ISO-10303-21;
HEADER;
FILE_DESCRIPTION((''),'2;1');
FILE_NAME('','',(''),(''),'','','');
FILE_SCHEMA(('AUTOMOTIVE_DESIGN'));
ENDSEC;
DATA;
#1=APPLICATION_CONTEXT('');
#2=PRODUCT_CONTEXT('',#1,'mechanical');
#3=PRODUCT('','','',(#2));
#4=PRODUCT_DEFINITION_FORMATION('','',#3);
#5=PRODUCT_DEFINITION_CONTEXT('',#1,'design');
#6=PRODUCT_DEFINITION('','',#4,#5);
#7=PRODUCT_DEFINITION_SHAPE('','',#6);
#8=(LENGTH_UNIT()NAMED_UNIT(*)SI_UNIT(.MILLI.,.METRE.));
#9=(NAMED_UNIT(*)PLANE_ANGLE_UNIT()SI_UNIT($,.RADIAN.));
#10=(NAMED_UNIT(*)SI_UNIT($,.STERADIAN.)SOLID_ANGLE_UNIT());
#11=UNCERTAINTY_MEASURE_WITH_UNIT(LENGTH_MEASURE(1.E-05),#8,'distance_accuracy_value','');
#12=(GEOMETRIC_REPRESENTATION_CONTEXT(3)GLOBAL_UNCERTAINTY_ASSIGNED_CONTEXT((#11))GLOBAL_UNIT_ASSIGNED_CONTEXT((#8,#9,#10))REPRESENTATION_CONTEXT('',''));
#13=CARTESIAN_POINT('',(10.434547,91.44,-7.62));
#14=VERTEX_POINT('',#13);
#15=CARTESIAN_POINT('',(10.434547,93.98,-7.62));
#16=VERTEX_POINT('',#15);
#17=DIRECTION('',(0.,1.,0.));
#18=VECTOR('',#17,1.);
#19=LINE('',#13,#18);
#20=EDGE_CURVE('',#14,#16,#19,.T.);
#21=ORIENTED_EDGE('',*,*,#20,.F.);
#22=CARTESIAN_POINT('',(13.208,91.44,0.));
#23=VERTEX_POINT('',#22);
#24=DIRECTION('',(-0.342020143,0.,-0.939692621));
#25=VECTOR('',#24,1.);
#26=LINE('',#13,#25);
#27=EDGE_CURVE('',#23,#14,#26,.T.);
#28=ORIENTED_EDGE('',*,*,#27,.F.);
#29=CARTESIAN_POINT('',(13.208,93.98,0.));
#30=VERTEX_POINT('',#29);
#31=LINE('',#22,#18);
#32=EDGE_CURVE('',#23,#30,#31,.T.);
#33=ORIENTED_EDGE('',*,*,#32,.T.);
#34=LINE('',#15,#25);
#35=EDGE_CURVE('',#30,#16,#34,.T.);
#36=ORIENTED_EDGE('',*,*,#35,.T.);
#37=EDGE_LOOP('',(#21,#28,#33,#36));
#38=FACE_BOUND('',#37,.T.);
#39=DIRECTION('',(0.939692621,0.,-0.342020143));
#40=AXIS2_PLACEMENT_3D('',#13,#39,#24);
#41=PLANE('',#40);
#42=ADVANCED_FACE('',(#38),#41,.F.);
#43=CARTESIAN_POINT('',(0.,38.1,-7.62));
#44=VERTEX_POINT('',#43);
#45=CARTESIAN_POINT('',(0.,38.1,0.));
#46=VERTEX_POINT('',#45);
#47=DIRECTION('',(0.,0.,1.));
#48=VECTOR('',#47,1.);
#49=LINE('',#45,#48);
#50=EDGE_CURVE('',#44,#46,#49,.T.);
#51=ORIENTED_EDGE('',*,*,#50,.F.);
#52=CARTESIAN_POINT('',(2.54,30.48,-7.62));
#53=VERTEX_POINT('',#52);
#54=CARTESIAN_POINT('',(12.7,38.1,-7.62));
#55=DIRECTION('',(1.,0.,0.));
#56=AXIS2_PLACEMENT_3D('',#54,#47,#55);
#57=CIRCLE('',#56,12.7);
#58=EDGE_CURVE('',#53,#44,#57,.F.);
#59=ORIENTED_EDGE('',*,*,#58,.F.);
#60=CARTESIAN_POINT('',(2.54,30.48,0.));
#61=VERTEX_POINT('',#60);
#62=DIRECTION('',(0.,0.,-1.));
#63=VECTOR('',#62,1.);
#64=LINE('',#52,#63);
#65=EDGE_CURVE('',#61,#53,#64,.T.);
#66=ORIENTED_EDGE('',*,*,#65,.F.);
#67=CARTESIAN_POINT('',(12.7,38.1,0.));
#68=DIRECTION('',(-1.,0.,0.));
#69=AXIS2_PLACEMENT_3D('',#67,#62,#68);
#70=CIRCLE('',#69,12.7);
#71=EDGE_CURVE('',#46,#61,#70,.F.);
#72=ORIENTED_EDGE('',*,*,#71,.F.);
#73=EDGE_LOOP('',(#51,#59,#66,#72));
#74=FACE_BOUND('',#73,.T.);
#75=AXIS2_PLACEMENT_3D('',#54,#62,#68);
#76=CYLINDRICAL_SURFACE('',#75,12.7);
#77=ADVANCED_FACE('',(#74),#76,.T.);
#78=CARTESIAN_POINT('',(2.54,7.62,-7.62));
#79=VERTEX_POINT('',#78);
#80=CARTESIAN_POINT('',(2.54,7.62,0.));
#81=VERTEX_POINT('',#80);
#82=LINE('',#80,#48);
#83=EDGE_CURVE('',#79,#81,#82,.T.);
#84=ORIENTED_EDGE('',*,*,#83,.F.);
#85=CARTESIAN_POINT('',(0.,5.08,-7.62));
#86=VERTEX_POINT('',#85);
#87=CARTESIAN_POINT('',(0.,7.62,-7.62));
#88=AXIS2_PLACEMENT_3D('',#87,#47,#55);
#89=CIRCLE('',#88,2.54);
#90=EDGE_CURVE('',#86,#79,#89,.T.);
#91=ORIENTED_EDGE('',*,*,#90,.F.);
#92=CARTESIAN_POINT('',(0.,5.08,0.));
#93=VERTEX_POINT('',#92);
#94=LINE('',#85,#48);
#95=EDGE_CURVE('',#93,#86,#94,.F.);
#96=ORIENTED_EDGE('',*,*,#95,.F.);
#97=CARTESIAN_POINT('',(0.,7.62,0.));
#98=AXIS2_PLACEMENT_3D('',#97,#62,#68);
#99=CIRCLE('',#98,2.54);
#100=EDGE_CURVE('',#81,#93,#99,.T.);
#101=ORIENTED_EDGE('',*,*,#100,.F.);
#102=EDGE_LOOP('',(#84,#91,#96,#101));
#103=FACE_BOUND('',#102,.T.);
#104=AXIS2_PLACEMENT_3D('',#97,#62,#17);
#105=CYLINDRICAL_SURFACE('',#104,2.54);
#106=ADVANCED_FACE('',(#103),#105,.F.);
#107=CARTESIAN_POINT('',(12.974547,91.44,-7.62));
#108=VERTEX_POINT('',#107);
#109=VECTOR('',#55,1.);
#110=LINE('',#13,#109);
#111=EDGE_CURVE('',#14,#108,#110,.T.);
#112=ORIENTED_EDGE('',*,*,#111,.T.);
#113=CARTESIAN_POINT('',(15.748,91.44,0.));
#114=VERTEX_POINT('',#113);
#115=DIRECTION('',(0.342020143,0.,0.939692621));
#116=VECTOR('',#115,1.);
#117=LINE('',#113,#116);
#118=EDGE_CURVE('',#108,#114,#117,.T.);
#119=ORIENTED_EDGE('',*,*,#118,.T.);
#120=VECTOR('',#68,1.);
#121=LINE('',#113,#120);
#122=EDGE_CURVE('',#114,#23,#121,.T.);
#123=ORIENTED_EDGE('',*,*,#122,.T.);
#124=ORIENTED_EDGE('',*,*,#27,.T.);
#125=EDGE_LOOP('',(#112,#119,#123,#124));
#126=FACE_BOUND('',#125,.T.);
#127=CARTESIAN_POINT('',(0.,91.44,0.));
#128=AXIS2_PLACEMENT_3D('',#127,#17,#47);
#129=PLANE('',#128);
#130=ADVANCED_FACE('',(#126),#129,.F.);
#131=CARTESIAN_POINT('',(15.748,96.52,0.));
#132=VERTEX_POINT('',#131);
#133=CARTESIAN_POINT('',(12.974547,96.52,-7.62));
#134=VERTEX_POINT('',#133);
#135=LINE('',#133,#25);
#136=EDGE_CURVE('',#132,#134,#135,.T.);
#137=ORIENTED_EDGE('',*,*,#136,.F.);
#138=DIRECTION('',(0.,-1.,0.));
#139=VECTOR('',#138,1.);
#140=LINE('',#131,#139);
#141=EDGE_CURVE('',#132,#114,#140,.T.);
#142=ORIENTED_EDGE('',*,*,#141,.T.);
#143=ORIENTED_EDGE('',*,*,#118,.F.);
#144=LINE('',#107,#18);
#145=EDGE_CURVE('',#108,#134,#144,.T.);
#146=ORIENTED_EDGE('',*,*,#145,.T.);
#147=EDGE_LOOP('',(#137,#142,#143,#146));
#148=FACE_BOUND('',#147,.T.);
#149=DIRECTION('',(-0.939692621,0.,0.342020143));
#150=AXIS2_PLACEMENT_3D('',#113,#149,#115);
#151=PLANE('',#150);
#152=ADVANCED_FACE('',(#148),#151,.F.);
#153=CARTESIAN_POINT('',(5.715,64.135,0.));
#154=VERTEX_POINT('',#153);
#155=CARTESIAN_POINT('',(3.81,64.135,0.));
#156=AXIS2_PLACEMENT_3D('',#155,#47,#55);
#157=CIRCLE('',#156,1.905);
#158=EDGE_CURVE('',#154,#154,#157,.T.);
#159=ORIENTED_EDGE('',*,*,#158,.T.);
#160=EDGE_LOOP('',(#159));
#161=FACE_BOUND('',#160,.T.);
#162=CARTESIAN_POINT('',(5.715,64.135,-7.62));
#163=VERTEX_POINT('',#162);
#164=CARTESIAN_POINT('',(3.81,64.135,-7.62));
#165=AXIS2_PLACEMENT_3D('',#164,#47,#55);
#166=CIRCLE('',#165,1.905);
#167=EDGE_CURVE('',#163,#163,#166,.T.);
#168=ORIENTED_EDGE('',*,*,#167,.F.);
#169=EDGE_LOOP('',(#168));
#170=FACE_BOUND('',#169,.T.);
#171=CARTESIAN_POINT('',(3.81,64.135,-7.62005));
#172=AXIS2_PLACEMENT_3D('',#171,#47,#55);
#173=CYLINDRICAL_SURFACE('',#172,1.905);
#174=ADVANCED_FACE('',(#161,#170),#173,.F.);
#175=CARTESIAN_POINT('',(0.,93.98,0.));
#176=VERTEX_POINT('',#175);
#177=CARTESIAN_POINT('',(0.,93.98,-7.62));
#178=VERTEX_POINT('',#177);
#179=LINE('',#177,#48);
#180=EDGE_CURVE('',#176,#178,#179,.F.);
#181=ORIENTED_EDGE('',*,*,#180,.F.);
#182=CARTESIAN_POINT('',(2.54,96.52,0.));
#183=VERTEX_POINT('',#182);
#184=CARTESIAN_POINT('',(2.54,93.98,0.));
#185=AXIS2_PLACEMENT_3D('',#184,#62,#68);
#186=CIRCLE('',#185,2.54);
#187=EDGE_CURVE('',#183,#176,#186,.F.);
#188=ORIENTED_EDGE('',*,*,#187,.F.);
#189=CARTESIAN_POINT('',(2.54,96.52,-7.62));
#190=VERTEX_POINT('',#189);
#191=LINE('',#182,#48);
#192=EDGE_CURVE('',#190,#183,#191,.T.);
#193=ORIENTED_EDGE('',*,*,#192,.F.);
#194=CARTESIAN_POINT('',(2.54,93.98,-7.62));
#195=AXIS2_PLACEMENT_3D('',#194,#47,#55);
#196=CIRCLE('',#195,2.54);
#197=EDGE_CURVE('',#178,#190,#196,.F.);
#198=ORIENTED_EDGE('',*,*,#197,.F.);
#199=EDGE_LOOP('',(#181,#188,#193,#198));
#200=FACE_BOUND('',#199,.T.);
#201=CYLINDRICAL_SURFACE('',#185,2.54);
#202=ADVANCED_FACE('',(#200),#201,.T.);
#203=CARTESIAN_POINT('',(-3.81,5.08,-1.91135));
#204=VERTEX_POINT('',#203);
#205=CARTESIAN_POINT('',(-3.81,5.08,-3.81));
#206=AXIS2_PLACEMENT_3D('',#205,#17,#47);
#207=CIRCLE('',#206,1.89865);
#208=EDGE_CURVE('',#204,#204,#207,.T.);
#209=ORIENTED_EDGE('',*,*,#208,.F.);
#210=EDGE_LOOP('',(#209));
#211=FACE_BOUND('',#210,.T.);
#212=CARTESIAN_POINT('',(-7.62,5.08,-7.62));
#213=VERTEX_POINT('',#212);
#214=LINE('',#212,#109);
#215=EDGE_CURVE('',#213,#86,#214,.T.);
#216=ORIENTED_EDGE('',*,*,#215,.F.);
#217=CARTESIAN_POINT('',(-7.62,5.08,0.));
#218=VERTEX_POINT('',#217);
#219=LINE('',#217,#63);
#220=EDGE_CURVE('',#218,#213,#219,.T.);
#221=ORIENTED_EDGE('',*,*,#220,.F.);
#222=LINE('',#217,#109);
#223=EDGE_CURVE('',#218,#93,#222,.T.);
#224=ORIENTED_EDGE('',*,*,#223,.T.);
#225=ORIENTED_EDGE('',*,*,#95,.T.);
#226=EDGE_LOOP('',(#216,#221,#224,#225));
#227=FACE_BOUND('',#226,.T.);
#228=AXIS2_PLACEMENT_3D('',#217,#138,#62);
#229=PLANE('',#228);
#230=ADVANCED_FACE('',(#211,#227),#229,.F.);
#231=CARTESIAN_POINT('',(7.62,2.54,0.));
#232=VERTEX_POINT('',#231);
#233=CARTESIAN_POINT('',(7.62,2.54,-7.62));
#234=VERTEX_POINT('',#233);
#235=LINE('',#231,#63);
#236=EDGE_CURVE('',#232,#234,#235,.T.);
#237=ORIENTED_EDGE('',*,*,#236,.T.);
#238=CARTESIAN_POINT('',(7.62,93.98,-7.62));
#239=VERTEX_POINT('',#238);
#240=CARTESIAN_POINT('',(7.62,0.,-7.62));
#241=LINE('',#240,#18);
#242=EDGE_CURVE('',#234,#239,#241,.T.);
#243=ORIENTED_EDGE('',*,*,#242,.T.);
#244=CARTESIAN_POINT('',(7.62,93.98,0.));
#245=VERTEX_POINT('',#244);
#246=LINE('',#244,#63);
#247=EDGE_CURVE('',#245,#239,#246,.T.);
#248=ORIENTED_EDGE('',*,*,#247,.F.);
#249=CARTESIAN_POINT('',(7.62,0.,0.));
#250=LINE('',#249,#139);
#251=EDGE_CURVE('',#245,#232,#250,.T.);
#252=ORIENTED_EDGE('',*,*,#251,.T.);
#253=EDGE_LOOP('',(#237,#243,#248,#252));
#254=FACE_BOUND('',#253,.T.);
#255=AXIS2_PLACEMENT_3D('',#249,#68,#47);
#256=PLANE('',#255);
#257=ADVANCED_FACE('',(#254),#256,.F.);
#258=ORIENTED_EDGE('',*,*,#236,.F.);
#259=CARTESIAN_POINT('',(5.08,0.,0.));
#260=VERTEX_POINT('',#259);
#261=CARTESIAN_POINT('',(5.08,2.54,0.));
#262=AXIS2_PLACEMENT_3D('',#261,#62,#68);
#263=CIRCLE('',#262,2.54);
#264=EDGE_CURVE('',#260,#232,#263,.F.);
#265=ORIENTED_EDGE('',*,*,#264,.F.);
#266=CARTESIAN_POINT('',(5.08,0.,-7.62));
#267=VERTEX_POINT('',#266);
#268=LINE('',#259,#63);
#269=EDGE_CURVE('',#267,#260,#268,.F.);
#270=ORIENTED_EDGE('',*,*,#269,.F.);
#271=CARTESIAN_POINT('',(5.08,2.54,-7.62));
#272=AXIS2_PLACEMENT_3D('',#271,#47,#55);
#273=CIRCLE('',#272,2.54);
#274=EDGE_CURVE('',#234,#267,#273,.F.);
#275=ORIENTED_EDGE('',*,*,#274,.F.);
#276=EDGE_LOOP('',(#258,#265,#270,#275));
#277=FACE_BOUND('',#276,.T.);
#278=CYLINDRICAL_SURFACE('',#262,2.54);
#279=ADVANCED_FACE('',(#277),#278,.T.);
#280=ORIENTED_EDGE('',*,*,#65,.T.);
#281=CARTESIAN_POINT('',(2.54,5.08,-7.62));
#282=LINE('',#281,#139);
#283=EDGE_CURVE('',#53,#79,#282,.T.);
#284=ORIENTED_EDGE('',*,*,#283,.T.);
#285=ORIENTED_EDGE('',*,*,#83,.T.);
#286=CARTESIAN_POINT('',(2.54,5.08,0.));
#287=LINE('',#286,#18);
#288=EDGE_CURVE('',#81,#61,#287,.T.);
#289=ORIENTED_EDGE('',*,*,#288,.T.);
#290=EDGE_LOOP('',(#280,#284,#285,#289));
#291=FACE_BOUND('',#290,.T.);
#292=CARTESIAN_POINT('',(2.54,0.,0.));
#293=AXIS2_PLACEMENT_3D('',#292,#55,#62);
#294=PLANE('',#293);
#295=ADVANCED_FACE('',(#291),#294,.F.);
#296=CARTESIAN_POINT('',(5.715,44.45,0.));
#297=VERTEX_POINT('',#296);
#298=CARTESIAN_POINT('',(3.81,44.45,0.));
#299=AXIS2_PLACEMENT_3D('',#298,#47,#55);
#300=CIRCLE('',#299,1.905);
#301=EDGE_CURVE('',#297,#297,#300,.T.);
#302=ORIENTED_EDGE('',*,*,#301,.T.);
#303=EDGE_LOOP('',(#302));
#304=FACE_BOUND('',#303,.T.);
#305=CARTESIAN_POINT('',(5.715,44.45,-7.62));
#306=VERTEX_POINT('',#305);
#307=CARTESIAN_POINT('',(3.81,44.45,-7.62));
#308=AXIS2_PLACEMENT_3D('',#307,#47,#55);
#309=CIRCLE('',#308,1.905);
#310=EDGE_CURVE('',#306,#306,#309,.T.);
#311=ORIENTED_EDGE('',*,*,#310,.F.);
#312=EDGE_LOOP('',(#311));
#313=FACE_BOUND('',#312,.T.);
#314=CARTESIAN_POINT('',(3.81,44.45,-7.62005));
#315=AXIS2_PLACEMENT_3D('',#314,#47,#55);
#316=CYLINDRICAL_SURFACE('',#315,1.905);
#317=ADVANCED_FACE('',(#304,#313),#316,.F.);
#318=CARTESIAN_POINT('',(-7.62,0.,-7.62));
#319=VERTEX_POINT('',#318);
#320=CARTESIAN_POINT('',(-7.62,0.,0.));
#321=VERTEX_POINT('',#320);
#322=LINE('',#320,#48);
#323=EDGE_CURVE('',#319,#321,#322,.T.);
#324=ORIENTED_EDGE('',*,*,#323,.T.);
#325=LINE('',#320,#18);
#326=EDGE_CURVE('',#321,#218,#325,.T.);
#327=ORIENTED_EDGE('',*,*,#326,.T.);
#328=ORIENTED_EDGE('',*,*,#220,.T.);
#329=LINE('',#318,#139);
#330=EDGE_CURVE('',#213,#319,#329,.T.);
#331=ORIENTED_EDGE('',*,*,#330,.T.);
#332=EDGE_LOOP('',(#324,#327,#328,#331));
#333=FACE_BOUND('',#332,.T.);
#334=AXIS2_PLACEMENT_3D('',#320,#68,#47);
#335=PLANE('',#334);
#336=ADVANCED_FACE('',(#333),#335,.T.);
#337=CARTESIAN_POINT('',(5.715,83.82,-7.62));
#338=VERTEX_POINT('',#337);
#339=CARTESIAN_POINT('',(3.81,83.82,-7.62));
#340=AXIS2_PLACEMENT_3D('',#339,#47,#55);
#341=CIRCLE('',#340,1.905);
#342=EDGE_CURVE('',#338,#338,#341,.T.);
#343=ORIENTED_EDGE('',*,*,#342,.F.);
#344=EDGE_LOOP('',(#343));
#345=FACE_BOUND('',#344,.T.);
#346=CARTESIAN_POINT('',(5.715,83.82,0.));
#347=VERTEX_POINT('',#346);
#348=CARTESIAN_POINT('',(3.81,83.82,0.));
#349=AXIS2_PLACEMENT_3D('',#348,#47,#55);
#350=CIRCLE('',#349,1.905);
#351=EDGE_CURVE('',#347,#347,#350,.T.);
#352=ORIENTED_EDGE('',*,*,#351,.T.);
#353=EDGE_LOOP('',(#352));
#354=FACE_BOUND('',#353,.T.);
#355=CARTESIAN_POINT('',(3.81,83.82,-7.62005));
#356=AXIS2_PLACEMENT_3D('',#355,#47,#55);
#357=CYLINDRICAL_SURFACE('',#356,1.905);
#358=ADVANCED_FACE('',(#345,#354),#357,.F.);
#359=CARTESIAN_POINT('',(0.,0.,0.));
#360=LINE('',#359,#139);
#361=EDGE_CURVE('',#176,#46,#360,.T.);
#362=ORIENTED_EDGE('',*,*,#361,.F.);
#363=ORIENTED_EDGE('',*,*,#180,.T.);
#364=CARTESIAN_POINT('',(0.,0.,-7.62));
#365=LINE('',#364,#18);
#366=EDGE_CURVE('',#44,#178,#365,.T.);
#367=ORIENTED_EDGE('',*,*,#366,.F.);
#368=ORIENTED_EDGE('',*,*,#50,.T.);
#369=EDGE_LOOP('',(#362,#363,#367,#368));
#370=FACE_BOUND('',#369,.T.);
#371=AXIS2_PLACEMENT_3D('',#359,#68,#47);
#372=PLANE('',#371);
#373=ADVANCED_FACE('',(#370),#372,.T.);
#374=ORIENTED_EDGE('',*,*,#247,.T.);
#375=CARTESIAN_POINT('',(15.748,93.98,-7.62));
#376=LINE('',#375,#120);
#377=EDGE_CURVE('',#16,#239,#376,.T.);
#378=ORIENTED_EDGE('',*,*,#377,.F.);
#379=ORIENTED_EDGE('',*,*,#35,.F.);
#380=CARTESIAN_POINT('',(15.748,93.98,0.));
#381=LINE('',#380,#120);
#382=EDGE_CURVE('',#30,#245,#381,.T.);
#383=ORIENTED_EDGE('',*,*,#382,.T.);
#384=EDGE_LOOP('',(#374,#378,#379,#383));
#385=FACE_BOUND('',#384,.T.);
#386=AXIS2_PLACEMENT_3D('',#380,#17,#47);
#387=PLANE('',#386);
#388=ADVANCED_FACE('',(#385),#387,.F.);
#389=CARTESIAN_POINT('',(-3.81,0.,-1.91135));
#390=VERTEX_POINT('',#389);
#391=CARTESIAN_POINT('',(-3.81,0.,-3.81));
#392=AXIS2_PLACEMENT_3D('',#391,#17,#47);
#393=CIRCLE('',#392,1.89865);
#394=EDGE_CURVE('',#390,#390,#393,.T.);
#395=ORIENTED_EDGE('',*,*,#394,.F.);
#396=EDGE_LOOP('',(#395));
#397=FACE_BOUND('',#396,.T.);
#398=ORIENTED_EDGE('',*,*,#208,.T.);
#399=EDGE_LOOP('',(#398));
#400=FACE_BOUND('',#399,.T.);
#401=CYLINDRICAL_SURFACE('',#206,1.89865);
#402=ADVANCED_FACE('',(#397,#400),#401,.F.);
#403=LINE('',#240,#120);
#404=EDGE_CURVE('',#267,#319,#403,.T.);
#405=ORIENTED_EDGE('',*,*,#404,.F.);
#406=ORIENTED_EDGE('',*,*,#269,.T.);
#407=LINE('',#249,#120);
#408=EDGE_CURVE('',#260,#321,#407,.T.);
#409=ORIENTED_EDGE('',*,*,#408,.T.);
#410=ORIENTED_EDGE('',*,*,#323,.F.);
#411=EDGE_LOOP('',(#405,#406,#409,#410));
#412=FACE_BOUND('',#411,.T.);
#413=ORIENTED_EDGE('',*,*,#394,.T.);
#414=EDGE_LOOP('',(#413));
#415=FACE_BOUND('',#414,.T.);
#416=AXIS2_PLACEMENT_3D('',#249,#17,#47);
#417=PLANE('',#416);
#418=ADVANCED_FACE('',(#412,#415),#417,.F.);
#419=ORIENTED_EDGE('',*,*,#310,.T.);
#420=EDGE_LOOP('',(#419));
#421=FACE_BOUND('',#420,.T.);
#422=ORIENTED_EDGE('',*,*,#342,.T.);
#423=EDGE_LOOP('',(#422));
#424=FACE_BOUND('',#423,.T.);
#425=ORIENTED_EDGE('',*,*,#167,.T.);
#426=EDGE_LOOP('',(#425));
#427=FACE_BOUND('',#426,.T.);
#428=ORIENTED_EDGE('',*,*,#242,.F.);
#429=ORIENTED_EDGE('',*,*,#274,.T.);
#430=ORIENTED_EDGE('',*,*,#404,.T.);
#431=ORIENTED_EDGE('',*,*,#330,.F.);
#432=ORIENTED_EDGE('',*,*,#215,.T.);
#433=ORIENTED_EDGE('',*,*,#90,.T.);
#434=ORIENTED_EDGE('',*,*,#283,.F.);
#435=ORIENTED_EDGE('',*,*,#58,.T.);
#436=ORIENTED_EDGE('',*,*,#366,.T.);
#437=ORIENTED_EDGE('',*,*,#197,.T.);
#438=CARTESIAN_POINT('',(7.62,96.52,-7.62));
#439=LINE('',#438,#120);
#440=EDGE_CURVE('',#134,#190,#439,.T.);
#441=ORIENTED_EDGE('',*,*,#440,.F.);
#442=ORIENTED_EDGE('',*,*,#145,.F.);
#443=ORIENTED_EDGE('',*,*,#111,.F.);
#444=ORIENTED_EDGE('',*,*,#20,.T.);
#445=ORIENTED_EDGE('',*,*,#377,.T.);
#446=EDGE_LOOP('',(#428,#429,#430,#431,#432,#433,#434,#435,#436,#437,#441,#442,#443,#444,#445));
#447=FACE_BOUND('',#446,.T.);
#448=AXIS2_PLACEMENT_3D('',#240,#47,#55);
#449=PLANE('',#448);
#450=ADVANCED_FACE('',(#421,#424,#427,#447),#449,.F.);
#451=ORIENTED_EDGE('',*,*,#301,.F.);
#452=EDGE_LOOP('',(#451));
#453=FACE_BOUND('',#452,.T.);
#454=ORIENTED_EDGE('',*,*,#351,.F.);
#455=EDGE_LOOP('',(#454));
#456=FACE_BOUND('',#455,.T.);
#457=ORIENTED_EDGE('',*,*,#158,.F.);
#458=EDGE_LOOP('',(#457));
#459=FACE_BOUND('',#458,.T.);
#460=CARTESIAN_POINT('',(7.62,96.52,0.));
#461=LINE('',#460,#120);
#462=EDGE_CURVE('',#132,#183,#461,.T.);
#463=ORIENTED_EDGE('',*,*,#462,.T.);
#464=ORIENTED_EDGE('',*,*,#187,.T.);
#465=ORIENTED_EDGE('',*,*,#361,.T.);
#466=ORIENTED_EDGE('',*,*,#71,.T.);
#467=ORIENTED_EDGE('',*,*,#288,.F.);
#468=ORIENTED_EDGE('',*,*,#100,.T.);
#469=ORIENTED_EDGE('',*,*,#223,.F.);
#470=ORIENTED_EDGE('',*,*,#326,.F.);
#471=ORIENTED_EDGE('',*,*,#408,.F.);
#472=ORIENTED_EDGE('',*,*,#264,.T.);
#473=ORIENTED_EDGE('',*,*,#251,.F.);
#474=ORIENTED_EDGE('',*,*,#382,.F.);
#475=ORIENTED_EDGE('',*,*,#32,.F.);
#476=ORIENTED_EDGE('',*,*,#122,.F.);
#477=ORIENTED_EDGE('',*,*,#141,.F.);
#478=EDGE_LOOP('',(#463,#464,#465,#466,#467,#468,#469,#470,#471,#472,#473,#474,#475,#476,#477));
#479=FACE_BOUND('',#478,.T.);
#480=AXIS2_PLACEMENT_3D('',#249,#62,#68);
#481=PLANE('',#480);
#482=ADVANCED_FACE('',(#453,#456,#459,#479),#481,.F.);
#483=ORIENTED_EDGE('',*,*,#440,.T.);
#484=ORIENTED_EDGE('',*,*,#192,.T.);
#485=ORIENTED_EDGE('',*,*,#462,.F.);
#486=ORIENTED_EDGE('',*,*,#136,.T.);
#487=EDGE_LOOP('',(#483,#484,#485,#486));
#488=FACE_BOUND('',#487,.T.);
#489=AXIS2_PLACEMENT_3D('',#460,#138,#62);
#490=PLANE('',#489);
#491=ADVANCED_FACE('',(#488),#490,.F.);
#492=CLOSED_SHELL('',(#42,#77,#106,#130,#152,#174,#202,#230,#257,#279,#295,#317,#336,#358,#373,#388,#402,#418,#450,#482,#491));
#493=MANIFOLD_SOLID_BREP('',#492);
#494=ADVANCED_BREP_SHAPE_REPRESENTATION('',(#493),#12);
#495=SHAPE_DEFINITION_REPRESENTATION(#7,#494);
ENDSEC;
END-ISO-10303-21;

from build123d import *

# Parameters (mm, degrees)
SKETCH1_W             = 7.62
SKETCH1_H             = 96.52
BOSS_EXTRUDE1_DEPTH   = 7.62
SKETCH2_W             = 7.62
SKETCH2_H             = 5.08
BOSS_EXTRUDE2_DEPTH   = 7.62
SKETCH4_W             = 7.62
SKETCH4_H             = 2.54
BOSS_EXTRUDE3_DEPTH   = 8.128
BOSS_EXTRUDE4_DEPTH   = 2.54
F_6_CLEARANCE_HOLE1_D = 3.7973
CUT_EXTRUDE1_DEPTH    = 2.54
SKETCH12_W            = 7.62
SKETCH12_H            = 25.4
CUT_EXTRUDE2_DEPTH    = 2.54
FILLET2_R             = 12.7
FILLET3_R             = 2.54
SKETCH14_R            = 1.905
CUT_EXTRUDE4_DEPTH    = 99.092682214


with BuildPart() as part:
    # Sketch1 → Boss-Extrude1 (new body)
    with BuildSketch(Plane(origin=(0, 0, 0), x_dir=(0, 0, -1), z_dir=(1, 0, 0))):
        with Locations((3.81, 48.26)):
            Rectangle(SKETCH1_W, SKETCH1_H)
    extrude(amount=BOSS_EXTRUDE1_DEPTH)

    # Sketch2 → Boss-Extrude2 (add)
    with BuildSketch(Plane.ZY):
        with Locations((-3.81, 2.54)):
            Rectangle(SKETCH2_W, SKETCH2_H)
    extrude(amount=BOSS_EXTRUDE2_DEPTH)

    # Sketch4 → Boss-Extrude3 (add)
    with BuildSketch(Plane(origin=(7.62, 0, 0), x_dir=(0, 0, -1), z_dir=(1, 0, 0))):
        with Locations((3.81, 95.25)):
            Rectangle(SKETCH4_W, SKETCH4_H)
    extrude(amount=BOSS_EXTRUDE3_DEPTH)

    # Sketch5 → Boss-Extrude4 (add)
    with BuildSketch(Plane.XZ.offset(-93.98)):
        Polygon((15.748, 0), (12.974546815, -7.62), (10.434546815, -7.62), (13.208, 0), align=None)
    extrude(amount=BOSS_EXTRUDE4_DEPTH)

    # #6 Clearance Hole1 (through all)
    with Locations(Plane(origin=(0, 5.08, 0), x_dir=(1, 0, 0), z_dir=(0, 1, 0))):
        with Locations((-3.81, 3.81)):
            Hole(F_6_CLEARANCE_HOLE1_D / 2)

    # Sketch8 → Cut-Extrude1 (cut)
    with BuildSketch(Plane.XZ.offset(-93.98)):
        Polygon((15.748, -7.62), (12.974546815, -7.62), (15.748, 0), align=None)
    extrude(amount=-CUT_EXTRUDE1_DEPTH, mode=Mode.SUBTRACT)

    # Sketch12 → Cut-Extrude2 (cut)
    with BuildSketch(Plane.ZY):
        with Locations((-3.81, 17.78)):
            Rectangle(SKETCH12_W, SKETCH12_H)
    extrude(amount=-CUT_EXTRUDE2_DEPTH, mode=Mode.SUBTRACT)

    # Fillet2
    # the kernel refuses this fillet: 12.7 mm, written as the material it takes off along each edge
    with BuildSketch(Plane(origin=(0, 30.48, 19.05), x_dir=(1, 0, 0), z_dir=(0, 0, -1))) as fillet2_piece_1:
        with BuildLine():
            CenterArc((12.7, -7.62), FILLET2_R, 143.130102354, 36.869897646)
            Line((0, -7.62), (-0.254, -7.62))
            Line((-0.254, -7.62), (-0.254, 0))
            Line((-0.254, 0), (0, 0.254))
            ThreePointArc((0, 0.254), (1.27, 0.254), (2.3368, 0.1524))
            Line((2.3368, 0.1524), (2.54, 0))
        make_face()
    extrude(amount=45.72, mode=Mode.SUBTRACT)

    # Fillet3
    fillet3_edges = [part.edges().sort_by_distance(p)[0] for p in [
        (2.54, 5.08, -3.81),
        (7.62, 0, -3.81),
        (0, 96.52, -3.81),
    ]]
    fillet(fillet3_edges, radius=FILLET3_R)

    # Sketch14 → Cut-Extrude4 (cut, through all)
    with BuildSketch(Plane.XY):
        with Locations((3.81, 83.82)):
            Circle(SKETCH14_R)
        with Locations((3.81, 44.45)):
            Circle(SKETCH14_R)
        with Locations((3.81, 64.135)):
            Circle(SKETCH14_R)
    extrude(amount=-CUT_EXTRUDE4_DEPTH, mode=Mode.SUBTRACT)


solid = part.part
